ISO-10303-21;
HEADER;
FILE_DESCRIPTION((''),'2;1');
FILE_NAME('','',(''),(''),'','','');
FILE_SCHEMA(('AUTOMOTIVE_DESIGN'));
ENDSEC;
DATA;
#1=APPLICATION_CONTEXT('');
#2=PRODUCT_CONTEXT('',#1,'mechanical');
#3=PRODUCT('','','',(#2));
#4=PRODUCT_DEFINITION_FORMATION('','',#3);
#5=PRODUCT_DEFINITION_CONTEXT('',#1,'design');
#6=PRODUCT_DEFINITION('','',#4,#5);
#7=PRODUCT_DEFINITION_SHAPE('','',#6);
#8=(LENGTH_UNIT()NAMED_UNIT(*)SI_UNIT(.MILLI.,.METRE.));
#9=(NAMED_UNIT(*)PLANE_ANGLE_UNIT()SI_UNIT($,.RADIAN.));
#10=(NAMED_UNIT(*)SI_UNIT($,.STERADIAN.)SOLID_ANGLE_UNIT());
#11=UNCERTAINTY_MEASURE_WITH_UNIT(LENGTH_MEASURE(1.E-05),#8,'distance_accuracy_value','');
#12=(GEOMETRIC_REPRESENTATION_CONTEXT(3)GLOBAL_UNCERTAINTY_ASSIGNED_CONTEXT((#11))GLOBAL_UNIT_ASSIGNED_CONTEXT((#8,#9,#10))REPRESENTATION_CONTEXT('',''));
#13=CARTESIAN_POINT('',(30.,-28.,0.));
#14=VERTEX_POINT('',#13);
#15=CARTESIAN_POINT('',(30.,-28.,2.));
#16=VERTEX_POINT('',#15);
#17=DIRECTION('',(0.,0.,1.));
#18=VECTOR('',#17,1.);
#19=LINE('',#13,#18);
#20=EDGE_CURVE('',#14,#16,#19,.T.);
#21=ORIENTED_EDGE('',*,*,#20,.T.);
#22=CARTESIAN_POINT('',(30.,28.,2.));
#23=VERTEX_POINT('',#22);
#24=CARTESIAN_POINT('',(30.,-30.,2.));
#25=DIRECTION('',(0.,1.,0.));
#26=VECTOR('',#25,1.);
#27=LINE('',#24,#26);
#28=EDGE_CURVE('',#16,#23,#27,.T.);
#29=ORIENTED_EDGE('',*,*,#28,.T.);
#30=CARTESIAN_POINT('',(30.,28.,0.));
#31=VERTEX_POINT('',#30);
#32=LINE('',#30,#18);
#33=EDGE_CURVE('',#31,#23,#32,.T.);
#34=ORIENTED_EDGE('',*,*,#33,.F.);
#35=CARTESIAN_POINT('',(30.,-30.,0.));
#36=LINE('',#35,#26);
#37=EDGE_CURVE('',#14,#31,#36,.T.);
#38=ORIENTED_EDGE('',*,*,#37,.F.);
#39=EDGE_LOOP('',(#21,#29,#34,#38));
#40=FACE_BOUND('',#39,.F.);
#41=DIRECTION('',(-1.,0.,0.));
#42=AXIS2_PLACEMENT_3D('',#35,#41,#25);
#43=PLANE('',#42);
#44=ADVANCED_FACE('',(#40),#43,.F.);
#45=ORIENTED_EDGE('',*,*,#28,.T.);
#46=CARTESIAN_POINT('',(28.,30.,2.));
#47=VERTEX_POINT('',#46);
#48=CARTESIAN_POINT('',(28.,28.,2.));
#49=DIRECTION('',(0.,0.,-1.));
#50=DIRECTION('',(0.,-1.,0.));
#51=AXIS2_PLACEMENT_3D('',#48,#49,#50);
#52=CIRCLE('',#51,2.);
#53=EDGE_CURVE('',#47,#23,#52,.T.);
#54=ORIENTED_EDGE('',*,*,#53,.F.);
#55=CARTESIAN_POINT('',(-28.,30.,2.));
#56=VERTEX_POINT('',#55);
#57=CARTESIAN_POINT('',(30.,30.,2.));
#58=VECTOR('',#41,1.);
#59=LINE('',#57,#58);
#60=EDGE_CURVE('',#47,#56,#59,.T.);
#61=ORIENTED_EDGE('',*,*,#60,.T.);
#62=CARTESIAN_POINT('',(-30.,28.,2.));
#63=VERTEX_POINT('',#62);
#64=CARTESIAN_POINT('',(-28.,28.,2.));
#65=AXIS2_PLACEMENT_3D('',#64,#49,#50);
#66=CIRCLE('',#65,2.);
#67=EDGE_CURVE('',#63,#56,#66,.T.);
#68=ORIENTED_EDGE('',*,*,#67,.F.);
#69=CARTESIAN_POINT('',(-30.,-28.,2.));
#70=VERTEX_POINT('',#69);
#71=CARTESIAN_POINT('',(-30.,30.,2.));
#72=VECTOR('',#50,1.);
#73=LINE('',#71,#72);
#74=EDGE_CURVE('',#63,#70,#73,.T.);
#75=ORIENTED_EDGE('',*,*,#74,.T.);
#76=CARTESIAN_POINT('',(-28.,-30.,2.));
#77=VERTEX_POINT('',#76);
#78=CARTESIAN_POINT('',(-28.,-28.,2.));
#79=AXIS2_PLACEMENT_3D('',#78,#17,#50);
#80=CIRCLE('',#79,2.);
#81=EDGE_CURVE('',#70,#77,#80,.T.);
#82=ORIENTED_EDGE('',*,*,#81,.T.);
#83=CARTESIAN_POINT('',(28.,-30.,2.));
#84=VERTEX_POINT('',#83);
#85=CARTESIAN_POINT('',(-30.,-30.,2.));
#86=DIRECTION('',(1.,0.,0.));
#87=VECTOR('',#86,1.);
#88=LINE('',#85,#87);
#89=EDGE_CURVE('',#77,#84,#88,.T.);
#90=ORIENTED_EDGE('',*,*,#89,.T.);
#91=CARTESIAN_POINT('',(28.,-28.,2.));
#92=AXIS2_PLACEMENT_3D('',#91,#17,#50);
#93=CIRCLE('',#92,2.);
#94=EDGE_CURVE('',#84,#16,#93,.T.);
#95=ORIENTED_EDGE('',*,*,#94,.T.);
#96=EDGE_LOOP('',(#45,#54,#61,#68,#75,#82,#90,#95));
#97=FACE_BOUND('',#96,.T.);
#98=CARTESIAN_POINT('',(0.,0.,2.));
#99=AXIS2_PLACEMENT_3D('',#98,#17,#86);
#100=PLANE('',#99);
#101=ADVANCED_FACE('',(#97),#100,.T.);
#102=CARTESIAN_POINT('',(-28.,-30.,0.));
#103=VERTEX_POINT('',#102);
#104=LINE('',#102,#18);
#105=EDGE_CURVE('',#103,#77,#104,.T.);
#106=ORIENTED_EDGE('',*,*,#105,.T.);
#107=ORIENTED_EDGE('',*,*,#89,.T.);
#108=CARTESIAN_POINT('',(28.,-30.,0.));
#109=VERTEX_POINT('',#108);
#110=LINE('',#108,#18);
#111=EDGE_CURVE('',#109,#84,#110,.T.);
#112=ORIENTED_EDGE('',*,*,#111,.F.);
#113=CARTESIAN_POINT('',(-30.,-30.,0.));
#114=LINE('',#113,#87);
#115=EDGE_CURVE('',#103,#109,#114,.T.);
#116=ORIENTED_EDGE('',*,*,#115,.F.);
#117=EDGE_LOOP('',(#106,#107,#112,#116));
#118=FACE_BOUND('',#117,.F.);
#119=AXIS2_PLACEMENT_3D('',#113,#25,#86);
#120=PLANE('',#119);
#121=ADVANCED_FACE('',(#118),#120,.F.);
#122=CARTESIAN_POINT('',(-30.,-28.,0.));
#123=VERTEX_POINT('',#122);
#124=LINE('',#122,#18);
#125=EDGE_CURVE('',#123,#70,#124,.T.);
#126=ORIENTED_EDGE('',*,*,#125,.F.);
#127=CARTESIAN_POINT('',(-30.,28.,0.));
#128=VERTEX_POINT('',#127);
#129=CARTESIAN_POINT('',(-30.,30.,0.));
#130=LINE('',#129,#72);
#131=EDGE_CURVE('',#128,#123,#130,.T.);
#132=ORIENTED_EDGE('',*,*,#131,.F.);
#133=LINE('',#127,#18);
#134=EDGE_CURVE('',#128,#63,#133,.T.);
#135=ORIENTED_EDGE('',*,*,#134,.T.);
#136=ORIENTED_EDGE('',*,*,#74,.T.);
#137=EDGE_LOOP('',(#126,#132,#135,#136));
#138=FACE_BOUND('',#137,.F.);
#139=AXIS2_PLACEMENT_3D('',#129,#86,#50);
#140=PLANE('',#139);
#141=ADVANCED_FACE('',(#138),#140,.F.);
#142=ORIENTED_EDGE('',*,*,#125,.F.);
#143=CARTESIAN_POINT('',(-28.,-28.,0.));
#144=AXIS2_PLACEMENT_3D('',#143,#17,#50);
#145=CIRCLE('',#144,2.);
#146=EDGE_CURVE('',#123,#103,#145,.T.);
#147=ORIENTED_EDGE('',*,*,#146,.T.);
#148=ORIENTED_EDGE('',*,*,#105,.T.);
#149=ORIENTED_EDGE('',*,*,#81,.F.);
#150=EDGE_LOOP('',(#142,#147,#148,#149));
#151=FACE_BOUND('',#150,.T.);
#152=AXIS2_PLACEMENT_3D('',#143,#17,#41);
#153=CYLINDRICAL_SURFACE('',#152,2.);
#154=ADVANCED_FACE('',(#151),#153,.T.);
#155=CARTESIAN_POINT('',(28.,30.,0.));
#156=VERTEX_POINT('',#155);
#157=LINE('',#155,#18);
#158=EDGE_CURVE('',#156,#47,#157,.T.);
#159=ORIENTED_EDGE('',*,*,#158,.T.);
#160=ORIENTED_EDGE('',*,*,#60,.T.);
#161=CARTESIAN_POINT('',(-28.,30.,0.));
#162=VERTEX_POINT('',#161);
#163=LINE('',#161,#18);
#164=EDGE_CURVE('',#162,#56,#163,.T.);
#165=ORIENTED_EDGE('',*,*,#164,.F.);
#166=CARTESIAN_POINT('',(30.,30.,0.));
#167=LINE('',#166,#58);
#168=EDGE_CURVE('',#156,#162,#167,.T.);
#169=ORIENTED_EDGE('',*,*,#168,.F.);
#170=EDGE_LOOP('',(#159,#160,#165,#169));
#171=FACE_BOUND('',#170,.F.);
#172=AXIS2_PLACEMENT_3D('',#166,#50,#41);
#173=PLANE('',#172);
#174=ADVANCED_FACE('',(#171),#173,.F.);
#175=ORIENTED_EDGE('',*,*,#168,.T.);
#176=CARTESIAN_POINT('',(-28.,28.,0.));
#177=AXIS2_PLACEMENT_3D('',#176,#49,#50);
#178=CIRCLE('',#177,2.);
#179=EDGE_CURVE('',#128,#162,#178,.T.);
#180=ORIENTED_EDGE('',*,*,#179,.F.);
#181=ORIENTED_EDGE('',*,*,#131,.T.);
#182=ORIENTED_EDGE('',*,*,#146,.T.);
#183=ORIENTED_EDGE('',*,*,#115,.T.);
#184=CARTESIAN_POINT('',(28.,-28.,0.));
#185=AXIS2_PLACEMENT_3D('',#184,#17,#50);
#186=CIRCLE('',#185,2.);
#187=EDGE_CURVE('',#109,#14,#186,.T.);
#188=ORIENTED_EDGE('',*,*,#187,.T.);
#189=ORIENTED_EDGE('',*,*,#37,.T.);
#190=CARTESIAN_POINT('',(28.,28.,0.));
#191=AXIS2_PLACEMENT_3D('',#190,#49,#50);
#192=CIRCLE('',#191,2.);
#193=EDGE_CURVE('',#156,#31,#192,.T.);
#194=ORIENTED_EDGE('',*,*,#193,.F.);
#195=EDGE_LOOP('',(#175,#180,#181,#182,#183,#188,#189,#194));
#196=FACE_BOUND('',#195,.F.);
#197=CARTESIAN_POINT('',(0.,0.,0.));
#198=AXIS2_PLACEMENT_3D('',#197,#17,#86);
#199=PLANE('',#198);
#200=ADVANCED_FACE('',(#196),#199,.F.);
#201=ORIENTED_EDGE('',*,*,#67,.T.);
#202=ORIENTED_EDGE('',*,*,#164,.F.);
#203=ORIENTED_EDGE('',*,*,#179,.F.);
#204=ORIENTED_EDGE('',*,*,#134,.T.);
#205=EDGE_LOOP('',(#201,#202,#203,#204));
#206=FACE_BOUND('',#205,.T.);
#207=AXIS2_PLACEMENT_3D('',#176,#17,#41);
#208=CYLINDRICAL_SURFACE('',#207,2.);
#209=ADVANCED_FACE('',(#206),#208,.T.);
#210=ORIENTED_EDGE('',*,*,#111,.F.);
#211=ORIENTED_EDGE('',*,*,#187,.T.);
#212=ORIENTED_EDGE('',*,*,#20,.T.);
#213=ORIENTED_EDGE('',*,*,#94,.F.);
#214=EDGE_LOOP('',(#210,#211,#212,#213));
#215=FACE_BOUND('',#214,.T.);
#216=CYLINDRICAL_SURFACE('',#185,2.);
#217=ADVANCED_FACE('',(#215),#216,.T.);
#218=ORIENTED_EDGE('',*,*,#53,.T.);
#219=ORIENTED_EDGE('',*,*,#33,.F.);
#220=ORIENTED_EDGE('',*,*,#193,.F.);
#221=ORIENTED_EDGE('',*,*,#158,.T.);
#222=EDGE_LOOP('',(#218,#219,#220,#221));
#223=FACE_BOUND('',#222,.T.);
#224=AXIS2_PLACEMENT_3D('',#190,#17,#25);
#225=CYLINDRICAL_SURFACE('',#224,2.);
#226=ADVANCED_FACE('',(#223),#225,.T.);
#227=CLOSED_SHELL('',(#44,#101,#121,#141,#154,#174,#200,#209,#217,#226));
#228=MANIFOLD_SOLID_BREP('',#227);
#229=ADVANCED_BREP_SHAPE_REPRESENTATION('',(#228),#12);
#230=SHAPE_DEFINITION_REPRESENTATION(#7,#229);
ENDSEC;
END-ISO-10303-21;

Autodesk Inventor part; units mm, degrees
ref_plane "YZ Plane" through (0, 0, 0) normal (1, 0, 0) x (0, 1, 0)
ref_plane "XZ Plane" through (0, 0, 0) normal (0, 1, 0) x (-1, 0, 0)
ref_plane "XY Plane" through (0, 0, 0) normal (0, 0, 1) x (1, 0, 0)
sketch "Sketch1" plane through (0, 0, 0) normal (0, 0, 1) x (1, 0, 0)
  line L0 (-30, -30) -> (30, -30)
  line L1 (30, -30) -> (30, 30)
  line L2 (30, 30) -> (-30, 30)
  line L3 (-30, 30) -> (-30, -30)
  line L4 (-30, -30) -> (30, 30) construction
  line L5 (30, -30) -> (-30, 30) construction
  line L6 (15.25, -15.25) -> (-15.25, -15.25)
  line L7 (-15.25, -15.25) -> (-15.25, 15.25)
  line L8 (-15.25, 15.25) -> (15.25, 15.25)
  line L9 (15.25, 15.25) -> (15.25, -15.25)
  line L10 (15.25, -15.25) -> (-15.25, 15.25) construction
  line L11 (-15.25, -15.25) -> (15.25, 15.25) construction
  point P0 (0, 0)
  dimension "d154" = 60
  dimension "d155" = 60
  dimension "d172" = 30.5
extrude "Plate5" add sketch "Sketch1" along normal blind 2 contours L3 L2 L1 L0 | L6 L7 L8 L9
fillet "Corner Round1" radius 2 4 edges at (30, 30, 1) (-30, 30, 1) (-30, -30, 1) (30, -30, 1)
properties part number "PNS 1664 FDS 1000 CUP 2" material "Stainless Steel"
